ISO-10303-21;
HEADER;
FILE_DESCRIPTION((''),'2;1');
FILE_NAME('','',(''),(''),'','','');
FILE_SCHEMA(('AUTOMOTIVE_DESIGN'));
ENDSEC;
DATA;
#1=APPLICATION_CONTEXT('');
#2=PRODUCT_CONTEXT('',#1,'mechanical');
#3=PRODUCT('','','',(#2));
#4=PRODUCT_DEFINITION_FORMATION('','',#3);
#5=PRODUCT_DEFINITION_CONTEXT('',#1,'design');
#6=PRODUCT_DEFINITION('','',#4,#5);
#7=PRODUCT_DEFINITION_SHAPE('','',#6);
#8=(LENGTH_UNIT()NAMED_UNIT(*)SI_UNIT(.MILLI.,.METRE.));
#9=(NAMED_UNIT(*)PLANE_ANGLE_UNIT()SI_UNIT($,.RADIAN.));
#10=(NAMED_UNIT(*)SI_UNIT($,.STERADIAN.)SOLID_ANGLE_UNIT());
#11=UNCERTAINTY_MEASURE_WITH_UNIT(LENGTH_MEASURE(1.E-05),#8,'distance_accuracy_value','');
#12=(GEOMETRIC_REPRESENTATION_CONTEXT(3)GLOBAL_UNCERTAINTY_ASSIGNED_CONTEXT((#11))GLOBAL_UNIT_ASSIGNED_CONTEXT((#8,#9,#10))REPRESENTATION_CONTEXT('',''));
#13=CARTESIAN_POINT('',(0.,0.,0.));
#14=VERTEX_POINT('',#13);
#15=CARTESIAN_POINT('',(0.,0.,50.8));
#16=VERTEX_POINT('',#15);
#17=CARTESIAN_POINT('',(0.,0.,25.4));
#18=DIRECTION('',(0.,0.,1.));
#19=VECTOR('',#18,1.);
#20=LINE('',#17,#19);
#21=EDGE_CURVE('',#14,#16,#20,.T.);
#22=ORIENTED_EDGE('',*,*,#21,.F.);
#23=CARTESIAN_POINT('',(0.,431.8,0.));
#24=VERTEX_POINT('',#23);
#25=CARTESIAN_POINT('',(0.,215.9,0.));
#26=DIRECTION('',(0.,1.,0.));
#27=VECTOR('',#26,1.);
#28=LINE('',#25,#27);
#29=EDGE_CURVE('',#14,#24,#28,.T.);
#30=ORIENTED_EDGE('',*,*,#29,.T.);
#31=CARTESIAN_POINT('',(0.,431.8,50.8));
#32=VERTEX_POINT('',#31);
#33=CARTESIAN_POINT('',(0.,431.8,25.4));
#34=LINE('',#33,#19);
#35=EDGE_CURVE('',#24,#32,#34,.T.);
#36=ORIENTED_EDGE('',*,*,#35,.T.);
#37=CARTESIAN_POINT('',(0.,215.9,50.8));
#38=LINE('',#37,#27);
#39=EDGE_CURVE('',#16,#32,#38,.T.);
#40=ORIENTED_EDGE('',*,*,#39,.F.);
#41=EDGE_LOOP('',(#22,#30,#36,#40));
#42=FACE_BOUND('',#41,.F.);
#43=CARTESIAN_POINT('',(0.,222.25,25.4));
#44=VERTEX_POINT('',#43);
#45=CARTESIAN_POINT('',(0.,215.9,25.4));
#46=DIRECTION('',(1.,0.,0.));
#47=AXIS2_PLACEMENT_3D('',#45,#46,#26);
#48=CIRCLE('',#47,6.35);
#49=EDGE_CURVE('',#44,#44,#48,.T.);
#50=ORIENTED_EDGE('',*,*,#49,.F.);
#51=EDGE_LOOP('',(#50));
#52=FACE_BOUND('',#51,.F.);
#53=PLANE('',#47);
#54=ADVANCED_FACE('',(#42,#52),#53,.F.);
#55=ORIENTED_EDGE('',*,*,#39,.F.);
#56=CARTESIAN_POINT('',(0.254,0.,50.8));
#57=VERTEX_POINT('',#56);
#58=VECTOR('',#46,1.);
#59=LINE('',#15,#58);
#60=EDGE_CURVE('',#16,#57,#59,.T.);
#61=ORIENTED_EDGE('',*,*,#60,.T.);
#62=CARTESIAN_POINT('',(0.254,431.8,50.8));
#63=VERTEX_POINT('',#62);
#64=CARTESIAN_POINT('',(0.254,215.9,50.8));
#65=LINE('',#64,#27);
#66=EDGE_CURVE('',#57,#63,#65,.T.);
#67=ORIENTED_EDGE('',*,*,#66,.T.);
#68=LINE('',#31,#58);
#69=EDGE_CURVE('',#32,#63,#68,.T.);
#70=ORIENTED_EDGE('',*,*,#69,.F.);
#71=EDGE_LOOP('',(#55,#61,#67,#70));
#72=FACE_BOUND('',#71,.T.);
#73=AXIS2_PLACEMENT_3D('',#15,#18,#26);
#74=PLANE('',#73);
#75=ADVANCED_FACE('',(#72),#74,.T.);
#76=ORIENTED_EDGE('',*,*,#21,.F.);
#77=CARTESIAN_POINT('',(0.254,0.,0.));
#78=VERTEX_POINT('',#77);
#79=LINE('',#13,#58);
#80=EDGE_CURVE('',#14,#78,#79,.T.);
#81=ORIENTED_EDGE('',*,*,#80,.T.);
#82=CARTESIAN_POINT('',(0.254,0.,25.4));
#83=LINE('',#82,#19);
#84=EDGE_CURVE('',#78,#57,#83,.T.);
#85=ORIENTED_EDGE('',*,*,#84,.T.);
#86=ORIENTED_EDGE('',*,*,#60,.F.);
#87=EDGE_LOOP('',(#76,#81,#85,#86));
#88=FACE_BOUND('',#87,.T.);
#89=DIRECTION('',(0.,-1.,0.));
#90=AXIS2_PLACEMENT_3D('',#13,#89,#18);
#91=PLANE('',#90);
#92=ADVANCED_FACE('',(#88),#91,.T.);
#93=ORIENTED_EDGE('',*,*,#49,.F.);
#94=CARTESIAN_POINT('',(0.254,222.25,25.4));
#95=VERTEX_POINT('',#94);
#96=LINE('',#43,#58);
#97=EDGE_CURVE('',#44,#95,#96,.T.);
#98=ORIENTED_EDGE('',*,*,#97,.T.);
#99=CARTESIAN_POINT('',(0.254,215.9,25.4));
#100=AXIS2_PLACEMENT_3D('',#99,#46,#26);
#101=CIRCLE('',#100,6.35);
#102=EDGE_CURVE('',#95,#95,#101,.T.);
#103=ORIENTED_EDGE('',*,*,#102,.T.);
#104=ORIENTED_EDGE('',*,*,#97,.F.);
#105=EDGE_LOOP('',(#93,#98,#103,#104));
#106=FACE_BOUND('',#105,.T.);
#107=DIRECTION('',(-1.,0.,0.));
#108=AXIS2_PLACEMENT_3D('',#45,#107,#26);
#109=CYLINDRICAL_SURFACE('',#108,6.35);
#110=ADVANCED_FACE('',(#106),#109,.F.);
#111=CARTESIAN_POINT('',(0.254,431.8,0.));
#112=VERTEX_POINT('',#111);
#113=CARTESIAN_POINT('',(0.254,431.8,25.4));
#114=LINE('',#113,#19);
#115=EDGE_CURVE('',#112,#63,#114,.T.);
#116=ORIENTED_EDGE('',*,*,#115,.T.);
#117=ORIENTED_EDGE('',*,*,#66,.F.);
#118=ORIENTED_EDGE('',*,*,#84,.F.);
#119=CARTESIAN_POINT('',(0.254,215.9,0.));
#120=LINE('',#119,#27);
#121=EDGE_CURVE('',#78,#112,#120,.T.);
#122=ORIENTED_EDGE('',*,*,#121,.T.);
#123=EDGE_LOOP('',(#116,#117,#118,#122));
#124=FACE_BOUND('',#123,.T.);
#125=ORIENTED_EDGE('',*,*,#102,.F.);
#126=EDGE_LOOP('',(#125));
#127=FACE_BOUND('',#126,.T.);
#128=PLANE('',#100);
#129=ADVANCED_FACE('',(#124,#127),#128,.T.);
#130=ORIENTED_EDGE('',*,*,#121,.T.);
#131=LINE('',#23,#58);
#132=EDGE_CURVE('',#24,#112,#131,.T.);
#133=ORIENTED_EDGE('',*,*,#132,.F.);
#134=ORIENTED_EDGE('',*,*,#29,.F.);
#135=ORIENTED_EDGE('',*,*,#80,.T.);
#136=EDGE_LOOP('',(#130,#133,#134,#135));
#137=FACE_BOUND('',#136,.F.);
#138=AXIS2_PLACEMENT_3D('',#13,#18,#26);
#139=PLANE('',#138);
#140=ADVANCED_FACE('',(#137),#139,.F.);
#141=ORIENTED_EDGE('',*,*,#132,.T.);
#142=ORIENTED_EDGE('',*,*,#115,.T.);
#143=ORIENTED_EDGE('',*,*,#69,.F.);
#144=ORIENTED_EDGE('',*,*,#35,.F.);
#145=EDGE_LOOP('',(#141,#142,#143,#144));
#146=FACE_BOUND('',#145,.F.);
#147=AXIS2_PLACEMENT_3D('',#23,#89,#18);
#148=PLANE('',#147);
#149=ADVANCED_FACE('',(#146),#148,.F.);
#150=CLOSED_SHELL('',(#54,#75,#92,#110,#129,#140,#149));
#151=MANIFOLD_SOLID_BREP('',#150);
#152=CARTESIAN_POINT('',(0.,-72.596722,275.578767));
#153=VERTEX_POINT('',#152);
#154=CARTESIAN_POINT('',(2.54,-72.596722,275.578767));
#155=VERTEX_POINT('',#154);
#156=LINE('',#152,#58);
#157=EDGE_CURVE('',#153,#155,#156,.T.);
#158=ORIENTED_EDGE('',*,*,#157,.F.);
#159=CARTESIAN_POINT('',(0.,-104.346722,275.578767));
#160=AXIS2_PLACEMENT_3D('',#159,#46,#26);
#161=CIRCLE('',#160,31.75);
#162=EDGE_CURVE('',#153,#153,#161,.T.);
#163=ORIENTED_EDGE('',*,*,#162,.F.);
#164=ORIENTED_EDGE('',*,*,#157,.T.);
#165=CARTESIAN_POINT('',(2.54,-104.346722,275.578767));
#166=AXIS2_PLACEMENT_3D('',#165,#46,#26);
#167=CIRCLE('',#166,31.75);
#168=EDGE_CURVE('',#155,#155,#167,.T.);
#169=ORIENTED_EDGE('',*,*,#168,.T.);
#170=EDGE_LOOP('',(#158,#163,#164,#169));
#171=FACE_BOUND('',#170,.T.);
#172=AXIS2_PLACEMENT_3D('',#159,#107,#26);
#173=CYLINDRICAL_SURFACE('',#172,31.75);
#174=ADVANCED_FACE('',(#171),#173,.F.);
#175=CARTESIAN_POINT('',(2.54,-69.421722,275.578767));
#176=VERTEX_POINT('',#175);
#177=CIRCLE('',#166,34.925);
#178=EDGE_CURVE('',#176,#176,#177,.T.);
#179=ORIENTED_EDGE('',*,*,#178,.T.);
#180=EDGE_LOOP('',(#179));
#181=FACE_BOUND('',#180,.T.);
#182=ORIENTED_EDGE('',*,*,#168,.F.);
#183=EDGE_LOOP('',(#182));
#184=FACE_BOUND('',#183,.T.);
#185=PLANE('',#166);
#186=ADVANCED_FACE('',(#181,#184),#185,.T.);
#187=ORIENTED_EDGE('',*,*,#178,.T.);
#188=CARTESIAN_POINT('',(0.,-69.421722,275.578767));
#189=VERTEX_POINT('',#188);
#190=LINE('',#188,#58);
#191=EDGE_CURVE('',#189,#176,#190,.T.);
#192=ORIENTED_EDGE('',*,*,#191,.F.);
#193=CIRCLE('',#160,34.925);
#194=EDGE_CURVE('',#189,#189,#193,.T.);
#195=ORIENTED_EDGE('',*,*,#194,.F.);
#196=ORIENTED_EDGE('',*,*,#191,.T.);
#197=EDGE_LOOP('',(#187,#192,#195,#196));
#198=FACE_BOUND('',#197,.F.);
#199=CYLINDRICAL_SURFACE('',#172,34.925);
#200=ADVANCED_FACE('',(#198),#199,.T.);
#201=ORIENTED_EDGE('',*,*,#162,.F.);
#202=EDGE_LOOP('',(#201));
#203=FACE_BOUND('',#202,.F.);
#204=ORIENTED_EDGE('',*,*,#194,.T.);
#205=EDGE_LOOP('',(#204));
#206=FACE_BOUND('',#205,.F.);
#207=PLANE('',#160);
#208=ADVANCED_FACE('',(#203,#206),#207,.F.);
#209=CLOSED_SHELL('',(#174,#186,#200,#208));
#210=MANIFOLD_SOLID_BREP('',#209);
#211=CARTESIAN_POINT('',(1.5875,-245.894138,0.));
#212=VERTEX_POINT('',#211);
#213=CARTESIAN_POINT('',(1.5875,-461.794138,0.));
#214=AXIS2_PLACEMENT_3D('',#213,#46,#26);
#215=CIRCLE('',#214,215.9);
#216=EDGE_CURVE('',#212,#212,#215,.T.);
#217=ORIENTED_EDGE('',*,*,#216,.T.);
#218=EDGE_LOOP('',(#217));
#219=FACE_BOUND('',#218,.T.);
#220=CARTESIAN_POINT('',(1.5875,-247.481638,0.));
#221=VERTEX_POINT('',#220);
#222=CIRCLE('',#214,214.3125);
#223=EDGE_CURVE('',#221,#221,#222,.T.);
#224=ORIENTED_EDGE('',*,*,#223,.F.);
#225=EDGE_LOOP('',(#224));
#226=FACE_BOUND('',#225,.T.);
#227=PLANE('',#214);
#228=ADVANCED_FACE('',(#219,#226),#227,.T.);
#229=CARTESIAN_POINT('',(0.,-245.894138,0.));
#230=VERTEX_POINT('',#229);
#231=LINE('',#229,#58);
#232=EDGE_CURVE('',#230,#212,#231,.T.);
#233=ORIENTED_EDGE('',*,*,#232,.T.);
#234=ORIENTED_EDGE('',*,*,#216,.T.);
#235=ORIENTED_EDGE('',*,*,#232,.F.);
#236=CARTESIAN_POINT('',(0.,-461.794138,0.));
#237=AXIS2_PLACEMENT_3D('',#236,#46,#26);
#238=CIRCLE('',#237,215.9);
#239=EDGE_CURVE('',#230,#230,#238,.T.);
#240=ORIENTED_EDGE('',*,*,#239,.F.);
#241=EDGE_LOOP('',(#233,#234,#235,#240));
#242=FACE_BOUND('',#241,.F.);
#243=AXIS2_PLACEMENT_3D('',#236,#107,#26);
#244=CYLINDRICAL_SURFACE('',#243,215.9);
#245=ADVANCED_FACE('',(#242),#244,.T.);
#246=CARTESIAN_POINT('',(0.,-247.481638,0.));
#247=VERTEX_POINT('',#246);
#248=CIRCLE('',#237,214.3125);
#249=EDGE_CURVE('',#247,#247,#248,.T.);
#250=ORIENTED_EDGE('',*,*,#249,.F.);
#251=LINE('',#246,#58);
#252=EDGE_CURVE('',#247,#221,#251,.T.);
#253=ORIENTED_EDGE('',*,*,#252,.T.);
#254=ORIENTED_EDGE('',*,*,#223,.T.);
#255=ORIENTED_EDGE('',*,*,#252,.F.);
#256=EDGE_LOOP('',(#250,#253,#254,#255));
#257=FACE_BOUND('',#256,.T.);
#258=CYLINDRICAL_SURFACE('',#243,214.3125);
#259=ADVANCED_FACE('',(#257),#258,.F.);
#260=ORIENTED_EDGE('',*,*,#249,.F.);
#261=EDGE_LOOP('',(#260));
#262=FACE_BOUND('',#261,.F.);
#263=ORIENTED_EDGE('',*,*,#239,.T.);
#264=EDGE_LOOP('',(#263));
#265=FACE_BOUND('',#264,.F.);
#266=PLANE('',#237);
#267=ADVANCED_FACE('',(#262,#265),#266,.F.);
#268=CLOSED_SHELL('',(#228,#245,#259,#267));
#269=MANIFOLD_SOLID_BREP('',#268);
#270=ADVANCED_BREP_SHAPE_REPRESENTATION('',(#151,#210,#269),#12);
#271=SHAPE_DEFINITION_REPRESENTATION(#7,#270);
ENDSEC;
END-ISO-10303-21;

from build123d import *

# Parameters (mm, degrees)
F0_W     = 431.8
F0_H     = 50.8
F0_R     = 6.35
F1_DEPTH = 0.254
F2_R     = 215.9
F2_R_2   = 214.3125
F3_DEPTH = 1.5875
F4_R     = 34.925
F4_R_2   = 31.75
F5_DEPTH = 2.54


# Not quite as in the source:
# - a feature names something its author has since deleted; it is built from what else it names


with BuildPart() as f1:
    # F0 (on Right) → F1 (new body)
    with BuildSketch(Plane.YZ):
        with Locations((215.9, 25.4)):
            Rectangle(F0_W, F0_H)
        with Locations((215.9, 25.4)):
            Circle(F0_R, mode=Mode.SUBTRACT)
    extrude(amount=F1_DEPTH)


with BuildPart() as f3:
    # F2 (on Right) → F3 (new body)
    with BuildSketch(Plane.YZ):
        with Locations((-461.7941379547, 0)):
            Circle(F2_R)
        with Locations((-461.7941379547, 0)):
            Circle(F2_R_2, mode=Mode.SUBTRACT)
    extrude(amount=F3_DEPTH)


with BuildPart() as f5:
    # F4 (on Right) → F5 (new body)
    with BuildSketch(Plane.YZ):
        with Locations((-104.3467223644, 275.5787670612)):
            Circle(F4_R)
        with Locations((-104.3467223644, 275.5787670612)):
            Circle(F4_R_2, mode=Mode.SUBTRACT)
    extrude(amount=F5_DEPTH)


solid = Compound([f1.part, f3.part, f5.part])
